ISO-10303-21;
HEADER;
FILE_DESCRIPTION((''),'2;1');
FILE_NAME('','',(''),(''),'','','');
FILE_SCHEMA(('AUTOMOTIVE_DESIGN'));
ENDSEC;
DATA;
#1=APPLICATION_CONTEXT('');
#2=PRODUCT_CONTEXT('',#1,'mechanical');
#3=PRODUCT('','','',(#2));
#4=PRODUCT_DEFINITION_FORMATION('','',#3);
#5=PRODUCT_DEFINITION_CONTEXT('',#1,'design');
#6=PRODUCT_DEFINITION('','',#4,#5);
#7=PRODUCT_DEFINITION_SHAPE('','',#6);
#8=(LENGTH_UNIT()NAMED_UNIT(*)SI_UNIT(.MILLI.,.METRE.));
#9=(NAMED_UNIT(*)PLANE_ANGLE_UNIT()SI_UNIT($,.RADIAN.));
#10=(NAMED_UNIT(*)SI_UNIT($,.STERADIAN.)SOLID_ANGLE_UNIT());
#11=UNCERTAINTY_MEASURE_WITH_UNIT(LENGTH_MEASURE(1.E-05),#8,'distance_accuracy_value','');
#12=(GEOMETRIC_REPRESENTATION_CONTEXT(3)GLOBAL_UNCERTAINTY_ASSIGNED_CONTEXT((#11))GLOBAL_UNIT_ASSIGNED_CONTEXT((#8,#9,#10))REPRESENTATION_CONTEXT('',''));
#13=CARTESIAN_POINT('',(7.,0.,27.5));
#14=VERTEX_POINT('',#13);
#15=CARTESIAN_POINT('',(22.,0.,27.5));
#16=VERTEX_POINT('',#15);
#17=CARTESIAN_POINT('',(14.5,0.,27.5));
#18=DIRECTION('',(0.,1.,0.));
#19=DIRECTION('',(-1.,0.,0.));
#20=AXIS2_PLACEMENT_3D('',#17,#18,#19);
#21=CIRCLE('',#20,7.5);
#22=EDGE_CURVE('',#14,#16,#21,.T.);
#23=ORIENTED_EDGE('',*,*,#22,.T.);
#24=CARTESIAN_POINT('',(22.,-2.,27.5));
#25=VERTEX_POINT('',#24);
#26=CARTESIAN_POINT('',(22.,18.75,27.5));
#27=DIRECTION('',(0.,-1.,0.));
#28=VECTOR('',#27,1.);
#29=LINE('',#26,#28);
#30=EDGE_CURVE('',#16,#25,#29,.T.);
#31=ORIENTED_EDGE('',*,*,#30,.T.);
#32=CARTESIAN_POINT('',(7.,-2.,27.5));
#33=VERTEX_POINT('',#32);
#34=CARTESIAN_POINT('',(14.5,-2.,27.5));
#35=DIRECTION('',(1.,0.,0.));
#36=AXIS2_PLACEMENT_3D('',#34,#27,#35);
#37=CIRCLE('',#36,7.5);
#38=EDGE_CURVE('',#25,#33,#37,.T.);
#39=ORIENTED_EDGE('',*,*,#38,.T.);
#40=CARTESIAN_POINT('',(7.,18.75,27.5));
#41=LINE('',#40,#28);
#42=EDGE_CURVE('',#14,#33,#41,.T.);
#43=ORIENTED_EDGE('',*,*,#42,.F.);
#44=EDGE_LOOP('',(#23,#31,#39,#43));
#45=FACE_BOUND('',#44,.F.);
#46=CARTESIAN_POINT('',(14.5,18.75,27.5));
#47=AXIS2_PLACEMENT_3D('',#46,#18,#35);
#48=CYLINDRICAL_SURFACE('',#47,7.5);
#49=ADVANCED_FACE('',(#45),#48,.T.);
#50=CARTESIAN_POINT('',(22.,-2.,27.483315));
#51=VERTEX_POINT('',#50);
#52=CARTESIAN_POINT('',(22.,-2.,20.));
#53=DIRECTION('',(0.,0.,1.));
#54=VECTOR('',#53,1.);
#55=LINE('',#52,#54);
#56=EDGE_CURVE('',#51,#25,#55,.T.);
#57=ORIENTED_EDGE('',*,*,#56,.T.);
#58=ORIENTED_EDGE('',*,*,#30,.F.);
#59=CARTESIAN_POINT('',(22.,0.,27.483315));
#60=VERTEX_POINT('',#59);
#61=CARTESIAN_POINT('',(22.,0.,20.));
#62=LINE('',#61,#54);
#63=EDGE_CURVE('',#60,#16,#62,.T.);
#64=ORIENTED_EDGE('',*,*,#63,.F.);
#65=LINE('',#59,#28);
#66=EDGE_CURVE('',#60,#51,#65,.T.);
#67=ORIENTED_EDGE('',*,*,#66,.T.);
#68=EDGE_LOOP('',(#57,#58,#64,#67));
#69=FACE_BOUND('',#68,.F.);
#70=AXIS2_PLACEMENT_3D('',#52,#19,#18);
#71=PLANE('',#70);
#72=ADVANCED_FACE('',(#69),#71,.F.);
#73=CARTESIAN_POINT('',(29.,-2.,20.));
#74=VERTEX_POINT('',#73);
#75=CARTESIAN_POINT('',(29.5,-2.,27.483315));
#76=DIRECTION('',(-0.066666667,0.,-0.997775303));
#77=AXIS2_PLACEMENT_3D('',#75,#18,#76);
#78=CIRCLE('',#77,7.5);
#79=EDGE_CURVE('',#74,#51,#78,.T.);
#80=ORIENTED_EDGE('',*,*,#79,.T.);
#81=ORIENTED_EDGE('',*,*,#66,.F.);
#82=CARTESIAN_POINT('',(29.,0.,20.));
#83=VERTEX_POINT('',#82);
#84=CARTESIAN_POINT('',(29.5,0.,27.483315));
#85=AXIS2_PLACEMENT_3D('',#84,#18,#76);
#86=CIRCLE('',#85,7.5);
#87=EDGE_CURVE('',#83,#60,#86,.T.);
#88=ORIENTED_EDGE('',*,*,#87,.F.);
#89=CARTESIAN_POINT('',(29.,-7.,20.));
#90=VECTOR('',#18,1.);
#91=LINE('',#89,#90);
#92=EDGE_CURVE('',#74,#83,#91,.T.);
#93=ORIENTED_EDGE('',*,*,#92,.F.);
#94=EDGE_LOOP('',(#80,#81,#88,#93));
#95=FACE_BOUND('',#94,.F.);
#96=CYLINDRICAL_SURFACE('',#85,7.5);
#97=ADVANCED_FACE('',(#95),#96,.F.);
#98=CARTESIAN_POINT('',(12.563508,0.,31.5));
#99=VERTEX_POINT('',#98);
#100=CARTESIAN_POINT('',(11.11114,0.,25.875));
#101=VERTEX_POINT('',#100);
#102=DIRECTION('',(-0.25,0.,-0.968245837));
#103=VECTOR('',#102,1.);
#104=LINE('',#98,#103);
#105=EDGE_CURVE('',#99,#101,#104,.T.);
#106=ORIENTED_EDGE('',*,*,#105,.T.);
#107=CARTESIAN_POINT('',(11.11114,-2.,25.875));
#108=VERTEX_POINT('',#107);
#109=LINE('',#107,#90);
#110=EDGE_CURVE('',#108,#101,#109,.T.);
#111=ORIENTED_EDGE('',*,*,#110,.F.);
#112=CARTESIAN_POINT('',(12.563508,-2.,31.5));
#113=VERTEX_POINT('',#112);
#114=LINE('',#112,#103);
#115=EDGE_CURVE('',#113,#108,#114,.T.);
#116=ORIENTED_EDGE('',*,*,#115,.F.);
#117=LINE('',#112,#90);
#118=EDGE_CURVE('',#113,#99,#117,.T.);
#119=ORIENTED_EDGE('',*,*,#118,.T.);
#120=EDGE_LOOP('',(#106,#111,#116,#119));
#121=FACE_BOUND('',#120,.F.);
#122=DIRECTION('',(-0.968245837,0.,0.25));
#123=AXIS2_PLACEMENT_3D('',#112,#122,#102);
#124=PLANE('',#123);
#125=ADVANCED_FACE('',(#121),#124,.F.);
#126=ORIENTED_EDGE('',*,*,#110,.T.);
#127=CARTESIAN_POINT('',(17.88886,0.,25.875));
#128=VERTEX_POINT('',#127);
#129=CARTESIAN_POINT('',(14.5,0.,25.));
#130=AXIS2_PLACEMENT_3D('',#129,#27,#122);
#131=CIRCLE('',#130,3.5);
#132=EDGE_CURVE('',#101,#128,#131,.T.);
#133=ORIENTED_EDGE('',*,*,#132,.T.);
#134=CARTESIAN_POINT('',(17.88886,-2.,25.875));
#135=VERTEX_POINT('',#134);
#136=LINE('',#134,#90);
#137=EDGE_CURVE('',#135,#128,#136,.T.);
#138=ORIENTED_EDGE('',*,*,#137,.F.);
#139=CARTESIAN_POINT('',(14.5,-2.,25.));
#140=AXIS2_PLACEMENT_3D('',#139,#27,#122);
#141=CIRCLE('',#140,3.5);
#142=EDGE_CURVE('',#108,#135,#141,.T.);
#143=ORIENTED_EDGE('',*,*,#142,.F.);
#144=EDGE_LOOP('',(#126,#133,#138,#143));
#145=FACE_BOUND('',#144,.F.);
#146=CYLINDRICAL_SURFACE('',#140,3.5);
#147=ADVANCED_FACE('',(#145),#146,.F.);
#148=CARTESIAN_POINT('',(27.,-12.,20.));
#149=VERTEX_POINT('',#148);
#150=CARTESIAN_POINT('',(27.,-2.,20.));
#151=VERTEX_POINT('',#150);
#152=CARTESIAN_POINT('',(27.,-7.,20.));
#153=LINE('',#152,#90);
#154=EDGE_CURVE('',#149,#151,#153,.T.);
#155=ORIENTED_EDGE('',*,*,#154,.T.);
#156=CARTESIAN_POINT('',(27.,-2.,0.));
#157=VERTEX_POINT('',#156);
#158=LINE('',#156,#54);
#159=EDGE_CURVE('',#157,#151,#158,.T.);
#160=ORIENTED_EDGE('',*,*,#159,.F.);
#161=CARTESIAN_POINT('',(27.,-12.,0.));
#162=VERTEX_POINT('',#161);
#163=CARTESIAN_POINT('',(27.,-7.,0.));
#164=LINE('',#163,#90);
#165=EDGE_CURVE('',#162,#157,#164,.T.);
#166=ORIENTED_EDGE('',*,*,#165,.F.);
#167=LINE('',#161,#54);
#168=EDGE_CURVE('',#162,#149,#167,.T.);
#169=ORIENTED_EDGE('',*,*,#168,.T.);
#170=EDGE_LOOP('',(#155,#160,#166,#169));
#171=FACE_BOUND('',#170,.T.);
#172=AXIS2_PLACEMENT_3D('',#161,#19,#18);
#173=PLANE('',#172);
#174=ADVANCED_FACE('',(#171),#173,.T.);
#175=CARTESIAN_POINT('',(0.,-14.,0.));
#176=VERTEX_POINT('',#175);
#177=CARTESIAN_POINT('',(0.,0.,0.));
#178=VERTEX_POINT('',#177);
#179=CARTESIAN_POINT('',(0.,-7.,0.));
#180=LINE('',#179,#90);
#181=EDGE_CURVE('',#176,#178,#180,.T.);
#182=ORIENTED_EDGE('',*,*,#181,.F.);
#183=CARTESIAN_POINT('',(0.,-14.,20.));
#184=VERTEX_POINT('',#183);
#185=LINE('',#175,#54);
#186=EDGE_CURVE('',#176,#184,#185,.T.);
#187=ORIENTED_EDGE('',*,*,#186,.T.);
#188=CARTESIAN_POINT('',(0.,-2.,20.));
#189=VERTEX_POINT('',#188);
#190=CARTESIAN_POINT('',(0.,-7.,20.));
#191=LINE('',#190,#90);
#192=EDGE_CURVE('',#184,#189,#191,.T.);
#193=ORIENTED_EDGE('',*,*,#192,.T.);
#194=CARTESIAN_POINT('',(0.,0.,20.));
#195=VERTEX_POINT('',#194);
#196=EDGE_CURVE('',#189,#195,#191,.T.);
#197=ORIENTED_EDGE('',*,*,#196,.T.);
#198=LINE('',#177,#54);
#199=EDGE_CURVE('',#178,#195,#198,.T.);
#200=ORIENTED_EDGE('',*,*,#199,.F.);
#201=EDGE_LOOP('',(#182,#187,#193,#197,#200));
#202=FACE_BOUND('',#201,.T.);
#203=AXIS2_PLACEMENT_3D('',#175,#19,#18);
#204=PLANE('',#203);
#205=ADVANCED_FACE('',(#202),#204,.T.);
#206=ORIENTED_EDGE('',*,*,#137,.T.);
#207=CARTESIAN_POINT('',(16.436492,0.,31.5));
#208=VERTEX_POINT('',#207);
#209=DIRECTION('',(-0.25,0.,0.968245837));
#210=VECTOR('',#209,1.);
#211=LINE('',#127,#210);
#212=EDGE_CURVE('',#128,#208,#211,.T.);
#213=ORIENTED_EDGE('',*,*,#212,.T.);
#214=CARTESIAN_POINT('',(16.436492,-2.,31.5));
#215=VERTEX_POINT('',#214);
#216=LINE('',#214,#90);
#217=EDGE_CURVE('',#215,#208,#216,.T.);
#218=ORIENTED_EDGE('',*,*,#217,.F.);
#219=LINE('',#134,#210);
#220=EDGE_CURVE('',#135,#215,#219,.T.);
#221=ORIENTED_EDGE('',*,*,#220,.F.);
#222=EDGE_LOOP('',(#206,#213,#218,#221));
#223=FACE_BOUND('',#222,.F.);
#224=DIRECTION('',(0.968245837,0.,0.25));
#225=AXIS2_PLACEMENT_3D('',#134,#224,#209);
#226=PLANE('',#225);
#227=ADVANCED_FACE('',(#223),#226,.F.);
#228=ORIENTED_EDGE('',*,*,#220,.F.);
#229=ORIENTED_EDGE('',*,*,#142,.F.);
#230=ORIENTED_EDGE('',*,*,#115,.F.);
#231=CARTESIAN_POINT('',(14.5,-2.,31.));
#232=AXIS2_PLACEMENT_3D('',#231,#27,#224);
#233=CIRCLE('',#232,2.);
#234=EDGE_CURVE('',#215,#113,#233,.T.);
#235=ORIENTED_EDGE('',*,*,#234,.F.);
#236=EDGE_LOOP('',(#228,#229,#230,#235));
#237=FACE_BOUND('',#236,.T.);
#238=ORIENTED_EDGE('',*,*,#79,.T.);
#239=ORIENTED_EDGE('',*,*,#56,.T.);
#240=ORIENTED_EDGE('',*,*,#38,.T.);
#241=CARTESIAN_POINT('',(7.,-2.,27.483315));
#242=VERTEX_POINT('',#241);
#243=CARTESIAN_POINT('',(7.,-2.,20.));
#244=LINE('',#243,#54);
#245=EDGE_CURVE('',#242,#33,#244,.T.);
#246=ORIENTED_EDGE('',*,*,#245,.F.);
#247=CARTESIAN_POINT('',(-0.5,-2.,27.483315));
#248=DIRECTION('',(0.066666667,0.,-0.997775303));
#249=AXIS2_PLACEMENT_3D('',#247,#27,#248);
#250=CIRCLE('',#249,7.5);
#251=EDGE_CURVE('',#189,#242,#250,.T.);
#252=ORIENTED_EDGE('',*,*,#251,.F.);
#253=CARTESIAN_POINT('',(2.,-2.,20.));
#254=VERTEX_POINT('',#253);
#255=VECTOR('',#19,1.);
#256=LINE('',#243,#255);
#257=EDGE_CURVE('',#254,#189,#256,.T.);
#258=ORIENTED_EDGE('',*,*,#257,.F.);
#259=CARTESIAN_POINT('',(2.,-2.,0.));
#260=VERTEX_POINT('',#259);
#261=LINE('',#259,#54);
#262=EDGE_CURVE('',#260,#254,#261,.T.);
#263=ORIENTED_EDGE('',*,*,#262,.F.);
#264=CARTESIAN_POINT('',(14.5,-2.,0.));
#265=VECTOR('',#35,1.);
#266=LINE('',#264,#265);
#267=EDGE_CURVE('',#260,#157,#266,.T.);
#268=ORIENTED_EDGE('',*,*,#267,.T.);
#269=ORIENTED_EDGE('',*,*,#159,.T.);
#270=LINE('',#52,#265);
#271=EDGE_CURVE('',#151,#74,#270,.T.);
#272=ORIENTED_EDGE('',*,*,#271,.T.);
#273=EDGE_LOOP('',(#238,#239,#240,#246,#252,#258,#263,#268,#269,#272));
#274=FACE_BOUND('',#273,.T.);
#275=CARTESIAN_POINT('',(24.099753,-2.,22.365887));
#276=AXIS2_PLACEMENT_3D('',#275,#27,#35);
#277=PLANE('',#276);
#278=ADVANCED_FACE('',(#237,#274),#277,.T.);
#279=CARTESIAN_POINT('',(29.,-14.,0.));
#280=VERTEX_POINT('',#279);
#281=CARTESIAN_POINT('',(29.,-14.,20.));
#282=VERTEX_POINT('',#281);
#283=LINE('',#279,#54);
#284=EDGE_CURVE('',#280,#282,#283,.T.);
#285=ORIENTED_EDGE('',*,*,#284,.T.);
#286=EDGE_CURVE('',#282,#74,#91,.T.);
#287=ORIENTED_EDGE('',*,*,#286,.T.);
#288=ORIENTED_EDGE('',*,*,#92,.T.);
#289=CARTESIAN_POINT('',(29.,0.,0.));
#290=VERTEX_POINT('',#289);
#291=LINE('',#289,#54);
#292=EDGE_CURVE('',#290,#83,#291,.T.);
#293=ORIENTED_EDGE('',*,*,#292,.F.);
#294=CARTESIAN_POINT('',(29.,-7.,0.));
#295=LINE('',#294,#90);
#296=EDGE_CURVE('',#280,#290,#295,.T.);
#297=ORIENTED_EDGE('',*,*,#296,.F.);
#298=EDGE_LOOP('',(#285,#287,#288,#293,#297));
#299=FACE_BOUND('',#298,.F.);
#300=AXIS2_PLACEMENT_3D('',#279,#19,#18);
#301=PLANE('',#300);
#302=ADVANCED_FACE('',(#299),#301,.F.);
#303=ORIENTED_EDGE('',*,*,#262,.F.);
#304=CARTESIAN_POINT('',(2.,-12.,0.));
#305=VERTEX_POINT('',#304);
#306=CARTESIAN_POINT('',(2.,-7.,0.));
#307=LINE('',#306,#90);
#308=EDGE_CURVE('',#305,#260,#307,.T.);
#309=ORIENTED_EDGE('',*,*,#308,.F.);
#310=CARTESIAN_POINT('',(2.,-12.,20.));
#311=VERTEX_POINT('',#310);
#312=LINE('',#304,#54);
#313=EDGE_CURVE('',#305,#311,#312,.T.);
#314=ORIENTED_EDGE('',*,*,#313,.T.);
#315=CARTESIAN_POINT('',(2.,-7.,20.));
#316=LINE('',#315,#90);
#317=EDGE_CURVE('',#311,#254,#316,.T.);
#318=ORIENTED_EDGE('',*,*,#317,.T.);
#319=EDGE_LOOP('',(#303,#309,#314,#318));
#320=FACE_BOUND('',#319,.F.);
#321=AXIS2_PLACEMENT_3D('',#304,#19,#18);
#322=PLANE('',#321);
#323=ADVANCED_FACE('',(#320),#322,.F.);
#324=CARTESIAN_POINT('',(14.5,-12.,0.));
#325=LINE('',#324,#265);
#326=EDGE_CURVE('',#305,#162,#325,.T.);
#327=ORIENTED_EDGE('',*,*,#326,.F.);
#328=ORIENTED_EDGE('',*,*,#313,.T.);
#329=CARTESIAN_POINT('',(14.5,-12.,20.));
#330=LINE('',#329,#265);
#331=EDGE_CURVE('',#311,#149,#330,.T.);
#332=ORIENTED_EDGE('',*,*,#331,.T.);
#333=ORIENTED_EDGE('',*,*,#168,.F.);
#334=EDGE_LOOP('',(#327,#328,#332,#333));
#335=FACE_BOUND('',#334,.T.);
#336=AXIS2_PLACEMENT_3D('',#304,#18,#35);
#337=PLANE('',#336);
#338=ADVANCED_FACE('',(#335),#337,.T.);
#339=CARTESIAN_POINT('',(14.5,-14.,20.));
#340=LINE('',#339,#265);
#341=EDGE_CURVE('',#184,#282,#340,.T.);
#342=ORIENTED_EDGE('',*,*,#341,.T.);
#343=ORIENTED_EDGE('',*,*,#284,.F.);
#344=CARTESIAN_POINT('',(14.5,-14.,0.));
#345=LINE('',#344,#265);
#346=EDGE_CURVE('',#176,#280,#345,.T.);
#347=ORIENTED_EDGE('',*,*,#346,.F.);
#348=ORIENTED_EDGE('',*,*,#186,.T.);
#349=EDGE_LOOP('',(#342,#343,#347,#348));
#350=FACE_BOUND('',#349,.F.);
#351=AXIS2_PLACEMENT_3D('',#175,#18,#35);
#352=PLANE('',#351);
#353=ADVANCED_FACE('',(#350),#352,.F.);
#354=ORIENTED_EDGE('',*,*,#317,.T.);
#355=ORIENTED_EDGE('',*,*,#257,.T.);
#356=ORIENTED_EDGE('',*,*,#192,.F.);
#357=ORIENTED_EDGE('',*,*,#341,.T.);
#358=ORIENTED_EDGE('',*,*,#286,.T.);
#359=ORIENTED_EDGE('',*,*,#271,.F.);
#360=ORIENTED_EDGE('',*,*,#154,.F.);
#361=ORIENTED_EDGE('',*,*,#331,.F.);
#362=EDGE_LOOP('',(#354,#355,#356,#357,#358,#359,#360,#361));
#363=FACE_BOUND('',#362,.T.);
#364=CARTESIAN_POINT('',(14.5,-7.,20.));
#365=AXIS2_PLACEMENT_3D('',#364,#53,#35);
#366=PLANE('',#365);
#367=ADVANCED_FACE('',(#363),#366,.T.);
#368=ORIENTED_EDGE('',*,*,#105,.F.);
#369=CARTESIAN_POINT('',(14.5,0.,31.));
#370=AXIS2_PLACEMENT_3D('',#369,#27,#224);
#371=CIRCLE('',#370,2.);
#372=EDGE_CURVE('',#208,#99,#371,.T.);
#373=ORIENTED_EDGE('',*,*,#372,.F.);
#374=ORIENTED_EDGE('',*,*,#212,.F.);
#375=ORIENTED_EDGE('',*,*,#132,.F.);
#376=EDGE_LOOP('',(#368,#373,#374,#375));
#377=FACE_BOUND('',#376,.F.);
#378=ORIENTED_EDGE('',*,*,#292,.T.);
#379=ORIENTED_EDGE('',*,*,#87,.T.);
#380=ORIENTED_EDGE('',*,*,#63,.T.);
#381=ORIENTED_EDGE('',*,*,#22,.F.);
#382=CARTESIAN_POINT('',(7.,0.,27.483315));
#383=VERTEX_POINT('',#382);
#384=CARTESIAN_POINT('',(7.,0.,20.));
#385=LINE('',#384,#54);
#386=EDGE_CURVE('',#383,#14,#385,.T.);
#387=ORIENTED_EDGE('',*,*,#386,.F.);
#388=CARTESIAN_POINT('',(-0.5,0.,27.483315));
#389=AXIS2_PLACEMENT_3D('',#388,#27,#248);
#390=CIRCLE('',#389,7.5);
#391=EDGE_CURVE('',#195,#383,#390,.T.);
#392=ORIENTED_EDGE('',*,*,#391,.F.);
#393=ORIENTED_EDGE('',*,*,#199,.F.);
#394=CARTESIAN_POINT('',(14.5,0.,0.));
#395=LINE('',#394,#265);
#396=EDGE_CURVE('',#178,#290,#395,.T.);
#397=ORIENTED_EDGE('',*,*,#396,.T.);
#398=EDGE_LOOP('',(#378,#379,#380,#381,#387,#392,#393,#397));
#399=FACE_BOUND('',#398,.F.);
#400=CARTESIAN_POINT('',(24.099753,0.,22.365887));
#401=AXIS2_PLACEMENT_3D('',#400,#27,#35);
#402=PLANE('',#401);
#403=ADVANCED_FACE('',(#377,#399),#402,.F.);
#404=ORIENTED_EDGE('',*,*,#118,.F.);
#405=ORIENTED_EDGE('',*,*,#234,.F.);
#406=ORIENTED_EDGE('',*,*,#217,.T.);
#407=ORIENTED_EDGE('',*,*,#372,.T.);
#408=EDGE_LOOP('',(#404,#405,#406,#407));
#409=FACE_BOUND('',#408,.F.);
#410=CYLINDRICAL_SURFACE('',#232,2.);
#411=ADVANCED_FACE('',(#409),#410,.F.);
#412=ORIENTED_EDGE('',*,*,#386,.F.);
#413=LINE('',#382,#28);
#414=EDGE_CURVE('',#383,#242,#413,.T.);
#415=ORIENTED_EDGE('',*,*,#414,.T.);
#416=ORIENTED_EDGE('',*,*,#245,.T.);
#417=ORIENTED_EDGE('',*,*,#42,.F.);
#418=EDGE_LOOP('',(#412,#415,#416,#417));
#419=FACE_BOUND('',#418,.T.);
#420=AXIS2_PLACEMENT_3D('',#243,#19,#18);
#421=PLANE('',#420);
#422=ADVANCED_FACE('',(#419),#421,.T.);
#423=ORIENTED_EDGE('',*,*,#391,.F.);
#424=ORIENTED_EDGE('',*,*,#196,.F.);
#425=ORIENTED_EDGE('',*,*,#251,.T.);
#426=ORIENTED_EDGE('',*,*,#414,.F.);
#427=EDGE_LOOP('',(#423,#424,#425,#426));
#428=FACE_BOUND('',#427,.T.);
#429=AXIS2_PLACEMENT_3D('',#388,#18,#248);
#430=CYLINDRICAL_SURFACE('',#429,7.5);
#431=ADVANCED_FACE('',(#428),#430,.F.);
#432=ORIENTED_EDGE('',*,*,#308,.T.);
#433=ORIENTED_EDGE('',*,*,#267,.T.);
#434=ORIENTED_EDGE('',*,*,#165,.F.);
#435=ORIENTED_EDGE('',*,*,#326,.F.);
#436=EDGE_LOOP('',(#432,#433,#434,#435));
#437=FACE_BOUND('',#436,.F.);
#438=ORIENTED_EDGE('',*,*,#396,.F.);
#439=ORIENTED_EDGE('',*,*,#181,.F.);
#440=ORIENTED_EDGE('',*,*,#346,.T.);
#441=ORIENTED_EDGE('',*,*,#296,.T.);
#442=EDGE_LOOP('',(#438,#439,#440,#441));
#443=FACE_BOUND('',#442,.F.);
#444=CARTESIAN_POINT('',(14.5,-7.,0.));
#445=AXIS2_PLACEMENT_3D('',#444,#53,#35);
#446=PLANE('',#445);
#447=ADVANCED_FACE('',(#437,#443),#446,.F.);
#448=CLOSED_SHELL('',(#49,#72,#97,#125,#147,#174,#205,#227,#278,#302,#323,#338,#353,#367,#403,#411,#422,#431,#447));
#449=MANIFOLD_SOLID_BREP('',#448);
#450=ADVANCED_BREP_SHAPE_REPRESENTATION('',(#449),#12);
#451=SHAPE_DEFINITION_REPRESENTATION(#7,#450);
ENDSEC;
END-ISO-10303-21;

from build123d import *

# Parameters (mm, degrees)
F0_W        = 29
F0_H        = 14
F0_W_2      = 25
F0_H_2      = 10
F1_DEPTH    = 20
F2_W        = 15
F2_H        = 2
F3_DEPTH    = 15
F5_DEPTH    = 2
F6_T1_DEPTH = 2
F6_T3_DEPTH = 2
F6_T5_DEPTH = 39.5
F6_T7_DEPTH = 39.5


# Not quite as in the source:
# - a fillet or chamfer that OpenCascade refuses, or shapes differently, is made with other operations: its cross-section is extruded or revolved along the edge and cut away or added


with BuildPart() as f1:
    # F0 (on Top) → F1 (new body)
    with BuildSketch(Plane.XY):
        with Locations((14.5, -7)):
            Rectangle(F0_W, F0_H)
        with Locations((14.5, -7)):
            Rectangle(F0_W_2, F0_H_2, mode=Mode.SUBTRACT)
    extrude(amount=F1_DEPTH)

    # F2 (on face) → F3 (join)
    with BuildSketch(Plane.XY.offset(20)):
        with Locations((14.5, -1)):
            Rectangle(F2_W, F2_H)
    extrude(amount=F3_DEPTH)

    # F4 (on face) → F5 (cut, through all)
    with BuildSketch(Plane.XZ.offset(2)):
        with BuildLine():
            Line((17.8888604279, 25.875), (16.4364916731, 31.5))
            ThreePointArc((16.4364916731, 31.5), (14.5, 33), (12.5635083269, 31.5))
            Line((12.5635083269, 31.5), (11.1111395721, 25.875))
            ThreePointArc((11.1111395721, 25.875), (14.5, 21.5), (17.8888604279, 25.875))
        make_face()
    extrude(amount=-F5_DEPTH, mode=Mode.SUBTRACT)

    # F6: fillet of radius 7.5 on 4 edges, made by hand

    # F6_s2 → F6_t1 (join)
    with BuildSketch(Plane.XZ):
        with BuildLine():
            ThreePointArc((0, 20), (4.9772255751, 22.3598393906), (7, 27.4833147735))
            Line((7, 27.4833147735), (7, 20))
            Line((7, 20), (0, 20))
        make_face()
    extrude(amount=F6_T1_DEPTH)

    # F6_s4 → F6_t3 (join)
    with BuildSketch(Plane.XZ):
        with BuildLine():
            ThreePointArc((29, 20), (24.0227744249, 22.3598393906), (22, 27.4833147735))
            Line((22, 27.4833147735), (22, 20))
            Line((22, 20), (29, 20))
        make_face()
    extrude(amount=F6_T3_DEPTH)

    # F6_s6 → F6_t5 (cut)
    with BuildSketch(Plane.XZ.offset(-18.75)):
        with BuildLine():
            ThreePointArc((22, 27.5), (19.8033008589, 32.8033008589), (14.5, 35))
            Line((14.5, 35), (22, 35))
            Line((22, 35), (22, 27.5))
        make_face()
    extrude(amount=F6_T5_DEPTH, mode=Mode.SUBTRACT)

    # F6_s8 → F6_t7 (cut)
    with BuildSketch(Plane.XZ.offset(-18.75)):
        with BuildLine():
            ThreePointArc((7, 27.5), (9.1966991411, 32.8033008589), (14.5, 35))
            Line((14.5, 35), (7, 35))
            Line((7, 35), (7, 27.5))
        make_face()
    extrude(amount=F6_T7_DEPTH, mode=Mode.SUBTRACT)


solid = f1.part
